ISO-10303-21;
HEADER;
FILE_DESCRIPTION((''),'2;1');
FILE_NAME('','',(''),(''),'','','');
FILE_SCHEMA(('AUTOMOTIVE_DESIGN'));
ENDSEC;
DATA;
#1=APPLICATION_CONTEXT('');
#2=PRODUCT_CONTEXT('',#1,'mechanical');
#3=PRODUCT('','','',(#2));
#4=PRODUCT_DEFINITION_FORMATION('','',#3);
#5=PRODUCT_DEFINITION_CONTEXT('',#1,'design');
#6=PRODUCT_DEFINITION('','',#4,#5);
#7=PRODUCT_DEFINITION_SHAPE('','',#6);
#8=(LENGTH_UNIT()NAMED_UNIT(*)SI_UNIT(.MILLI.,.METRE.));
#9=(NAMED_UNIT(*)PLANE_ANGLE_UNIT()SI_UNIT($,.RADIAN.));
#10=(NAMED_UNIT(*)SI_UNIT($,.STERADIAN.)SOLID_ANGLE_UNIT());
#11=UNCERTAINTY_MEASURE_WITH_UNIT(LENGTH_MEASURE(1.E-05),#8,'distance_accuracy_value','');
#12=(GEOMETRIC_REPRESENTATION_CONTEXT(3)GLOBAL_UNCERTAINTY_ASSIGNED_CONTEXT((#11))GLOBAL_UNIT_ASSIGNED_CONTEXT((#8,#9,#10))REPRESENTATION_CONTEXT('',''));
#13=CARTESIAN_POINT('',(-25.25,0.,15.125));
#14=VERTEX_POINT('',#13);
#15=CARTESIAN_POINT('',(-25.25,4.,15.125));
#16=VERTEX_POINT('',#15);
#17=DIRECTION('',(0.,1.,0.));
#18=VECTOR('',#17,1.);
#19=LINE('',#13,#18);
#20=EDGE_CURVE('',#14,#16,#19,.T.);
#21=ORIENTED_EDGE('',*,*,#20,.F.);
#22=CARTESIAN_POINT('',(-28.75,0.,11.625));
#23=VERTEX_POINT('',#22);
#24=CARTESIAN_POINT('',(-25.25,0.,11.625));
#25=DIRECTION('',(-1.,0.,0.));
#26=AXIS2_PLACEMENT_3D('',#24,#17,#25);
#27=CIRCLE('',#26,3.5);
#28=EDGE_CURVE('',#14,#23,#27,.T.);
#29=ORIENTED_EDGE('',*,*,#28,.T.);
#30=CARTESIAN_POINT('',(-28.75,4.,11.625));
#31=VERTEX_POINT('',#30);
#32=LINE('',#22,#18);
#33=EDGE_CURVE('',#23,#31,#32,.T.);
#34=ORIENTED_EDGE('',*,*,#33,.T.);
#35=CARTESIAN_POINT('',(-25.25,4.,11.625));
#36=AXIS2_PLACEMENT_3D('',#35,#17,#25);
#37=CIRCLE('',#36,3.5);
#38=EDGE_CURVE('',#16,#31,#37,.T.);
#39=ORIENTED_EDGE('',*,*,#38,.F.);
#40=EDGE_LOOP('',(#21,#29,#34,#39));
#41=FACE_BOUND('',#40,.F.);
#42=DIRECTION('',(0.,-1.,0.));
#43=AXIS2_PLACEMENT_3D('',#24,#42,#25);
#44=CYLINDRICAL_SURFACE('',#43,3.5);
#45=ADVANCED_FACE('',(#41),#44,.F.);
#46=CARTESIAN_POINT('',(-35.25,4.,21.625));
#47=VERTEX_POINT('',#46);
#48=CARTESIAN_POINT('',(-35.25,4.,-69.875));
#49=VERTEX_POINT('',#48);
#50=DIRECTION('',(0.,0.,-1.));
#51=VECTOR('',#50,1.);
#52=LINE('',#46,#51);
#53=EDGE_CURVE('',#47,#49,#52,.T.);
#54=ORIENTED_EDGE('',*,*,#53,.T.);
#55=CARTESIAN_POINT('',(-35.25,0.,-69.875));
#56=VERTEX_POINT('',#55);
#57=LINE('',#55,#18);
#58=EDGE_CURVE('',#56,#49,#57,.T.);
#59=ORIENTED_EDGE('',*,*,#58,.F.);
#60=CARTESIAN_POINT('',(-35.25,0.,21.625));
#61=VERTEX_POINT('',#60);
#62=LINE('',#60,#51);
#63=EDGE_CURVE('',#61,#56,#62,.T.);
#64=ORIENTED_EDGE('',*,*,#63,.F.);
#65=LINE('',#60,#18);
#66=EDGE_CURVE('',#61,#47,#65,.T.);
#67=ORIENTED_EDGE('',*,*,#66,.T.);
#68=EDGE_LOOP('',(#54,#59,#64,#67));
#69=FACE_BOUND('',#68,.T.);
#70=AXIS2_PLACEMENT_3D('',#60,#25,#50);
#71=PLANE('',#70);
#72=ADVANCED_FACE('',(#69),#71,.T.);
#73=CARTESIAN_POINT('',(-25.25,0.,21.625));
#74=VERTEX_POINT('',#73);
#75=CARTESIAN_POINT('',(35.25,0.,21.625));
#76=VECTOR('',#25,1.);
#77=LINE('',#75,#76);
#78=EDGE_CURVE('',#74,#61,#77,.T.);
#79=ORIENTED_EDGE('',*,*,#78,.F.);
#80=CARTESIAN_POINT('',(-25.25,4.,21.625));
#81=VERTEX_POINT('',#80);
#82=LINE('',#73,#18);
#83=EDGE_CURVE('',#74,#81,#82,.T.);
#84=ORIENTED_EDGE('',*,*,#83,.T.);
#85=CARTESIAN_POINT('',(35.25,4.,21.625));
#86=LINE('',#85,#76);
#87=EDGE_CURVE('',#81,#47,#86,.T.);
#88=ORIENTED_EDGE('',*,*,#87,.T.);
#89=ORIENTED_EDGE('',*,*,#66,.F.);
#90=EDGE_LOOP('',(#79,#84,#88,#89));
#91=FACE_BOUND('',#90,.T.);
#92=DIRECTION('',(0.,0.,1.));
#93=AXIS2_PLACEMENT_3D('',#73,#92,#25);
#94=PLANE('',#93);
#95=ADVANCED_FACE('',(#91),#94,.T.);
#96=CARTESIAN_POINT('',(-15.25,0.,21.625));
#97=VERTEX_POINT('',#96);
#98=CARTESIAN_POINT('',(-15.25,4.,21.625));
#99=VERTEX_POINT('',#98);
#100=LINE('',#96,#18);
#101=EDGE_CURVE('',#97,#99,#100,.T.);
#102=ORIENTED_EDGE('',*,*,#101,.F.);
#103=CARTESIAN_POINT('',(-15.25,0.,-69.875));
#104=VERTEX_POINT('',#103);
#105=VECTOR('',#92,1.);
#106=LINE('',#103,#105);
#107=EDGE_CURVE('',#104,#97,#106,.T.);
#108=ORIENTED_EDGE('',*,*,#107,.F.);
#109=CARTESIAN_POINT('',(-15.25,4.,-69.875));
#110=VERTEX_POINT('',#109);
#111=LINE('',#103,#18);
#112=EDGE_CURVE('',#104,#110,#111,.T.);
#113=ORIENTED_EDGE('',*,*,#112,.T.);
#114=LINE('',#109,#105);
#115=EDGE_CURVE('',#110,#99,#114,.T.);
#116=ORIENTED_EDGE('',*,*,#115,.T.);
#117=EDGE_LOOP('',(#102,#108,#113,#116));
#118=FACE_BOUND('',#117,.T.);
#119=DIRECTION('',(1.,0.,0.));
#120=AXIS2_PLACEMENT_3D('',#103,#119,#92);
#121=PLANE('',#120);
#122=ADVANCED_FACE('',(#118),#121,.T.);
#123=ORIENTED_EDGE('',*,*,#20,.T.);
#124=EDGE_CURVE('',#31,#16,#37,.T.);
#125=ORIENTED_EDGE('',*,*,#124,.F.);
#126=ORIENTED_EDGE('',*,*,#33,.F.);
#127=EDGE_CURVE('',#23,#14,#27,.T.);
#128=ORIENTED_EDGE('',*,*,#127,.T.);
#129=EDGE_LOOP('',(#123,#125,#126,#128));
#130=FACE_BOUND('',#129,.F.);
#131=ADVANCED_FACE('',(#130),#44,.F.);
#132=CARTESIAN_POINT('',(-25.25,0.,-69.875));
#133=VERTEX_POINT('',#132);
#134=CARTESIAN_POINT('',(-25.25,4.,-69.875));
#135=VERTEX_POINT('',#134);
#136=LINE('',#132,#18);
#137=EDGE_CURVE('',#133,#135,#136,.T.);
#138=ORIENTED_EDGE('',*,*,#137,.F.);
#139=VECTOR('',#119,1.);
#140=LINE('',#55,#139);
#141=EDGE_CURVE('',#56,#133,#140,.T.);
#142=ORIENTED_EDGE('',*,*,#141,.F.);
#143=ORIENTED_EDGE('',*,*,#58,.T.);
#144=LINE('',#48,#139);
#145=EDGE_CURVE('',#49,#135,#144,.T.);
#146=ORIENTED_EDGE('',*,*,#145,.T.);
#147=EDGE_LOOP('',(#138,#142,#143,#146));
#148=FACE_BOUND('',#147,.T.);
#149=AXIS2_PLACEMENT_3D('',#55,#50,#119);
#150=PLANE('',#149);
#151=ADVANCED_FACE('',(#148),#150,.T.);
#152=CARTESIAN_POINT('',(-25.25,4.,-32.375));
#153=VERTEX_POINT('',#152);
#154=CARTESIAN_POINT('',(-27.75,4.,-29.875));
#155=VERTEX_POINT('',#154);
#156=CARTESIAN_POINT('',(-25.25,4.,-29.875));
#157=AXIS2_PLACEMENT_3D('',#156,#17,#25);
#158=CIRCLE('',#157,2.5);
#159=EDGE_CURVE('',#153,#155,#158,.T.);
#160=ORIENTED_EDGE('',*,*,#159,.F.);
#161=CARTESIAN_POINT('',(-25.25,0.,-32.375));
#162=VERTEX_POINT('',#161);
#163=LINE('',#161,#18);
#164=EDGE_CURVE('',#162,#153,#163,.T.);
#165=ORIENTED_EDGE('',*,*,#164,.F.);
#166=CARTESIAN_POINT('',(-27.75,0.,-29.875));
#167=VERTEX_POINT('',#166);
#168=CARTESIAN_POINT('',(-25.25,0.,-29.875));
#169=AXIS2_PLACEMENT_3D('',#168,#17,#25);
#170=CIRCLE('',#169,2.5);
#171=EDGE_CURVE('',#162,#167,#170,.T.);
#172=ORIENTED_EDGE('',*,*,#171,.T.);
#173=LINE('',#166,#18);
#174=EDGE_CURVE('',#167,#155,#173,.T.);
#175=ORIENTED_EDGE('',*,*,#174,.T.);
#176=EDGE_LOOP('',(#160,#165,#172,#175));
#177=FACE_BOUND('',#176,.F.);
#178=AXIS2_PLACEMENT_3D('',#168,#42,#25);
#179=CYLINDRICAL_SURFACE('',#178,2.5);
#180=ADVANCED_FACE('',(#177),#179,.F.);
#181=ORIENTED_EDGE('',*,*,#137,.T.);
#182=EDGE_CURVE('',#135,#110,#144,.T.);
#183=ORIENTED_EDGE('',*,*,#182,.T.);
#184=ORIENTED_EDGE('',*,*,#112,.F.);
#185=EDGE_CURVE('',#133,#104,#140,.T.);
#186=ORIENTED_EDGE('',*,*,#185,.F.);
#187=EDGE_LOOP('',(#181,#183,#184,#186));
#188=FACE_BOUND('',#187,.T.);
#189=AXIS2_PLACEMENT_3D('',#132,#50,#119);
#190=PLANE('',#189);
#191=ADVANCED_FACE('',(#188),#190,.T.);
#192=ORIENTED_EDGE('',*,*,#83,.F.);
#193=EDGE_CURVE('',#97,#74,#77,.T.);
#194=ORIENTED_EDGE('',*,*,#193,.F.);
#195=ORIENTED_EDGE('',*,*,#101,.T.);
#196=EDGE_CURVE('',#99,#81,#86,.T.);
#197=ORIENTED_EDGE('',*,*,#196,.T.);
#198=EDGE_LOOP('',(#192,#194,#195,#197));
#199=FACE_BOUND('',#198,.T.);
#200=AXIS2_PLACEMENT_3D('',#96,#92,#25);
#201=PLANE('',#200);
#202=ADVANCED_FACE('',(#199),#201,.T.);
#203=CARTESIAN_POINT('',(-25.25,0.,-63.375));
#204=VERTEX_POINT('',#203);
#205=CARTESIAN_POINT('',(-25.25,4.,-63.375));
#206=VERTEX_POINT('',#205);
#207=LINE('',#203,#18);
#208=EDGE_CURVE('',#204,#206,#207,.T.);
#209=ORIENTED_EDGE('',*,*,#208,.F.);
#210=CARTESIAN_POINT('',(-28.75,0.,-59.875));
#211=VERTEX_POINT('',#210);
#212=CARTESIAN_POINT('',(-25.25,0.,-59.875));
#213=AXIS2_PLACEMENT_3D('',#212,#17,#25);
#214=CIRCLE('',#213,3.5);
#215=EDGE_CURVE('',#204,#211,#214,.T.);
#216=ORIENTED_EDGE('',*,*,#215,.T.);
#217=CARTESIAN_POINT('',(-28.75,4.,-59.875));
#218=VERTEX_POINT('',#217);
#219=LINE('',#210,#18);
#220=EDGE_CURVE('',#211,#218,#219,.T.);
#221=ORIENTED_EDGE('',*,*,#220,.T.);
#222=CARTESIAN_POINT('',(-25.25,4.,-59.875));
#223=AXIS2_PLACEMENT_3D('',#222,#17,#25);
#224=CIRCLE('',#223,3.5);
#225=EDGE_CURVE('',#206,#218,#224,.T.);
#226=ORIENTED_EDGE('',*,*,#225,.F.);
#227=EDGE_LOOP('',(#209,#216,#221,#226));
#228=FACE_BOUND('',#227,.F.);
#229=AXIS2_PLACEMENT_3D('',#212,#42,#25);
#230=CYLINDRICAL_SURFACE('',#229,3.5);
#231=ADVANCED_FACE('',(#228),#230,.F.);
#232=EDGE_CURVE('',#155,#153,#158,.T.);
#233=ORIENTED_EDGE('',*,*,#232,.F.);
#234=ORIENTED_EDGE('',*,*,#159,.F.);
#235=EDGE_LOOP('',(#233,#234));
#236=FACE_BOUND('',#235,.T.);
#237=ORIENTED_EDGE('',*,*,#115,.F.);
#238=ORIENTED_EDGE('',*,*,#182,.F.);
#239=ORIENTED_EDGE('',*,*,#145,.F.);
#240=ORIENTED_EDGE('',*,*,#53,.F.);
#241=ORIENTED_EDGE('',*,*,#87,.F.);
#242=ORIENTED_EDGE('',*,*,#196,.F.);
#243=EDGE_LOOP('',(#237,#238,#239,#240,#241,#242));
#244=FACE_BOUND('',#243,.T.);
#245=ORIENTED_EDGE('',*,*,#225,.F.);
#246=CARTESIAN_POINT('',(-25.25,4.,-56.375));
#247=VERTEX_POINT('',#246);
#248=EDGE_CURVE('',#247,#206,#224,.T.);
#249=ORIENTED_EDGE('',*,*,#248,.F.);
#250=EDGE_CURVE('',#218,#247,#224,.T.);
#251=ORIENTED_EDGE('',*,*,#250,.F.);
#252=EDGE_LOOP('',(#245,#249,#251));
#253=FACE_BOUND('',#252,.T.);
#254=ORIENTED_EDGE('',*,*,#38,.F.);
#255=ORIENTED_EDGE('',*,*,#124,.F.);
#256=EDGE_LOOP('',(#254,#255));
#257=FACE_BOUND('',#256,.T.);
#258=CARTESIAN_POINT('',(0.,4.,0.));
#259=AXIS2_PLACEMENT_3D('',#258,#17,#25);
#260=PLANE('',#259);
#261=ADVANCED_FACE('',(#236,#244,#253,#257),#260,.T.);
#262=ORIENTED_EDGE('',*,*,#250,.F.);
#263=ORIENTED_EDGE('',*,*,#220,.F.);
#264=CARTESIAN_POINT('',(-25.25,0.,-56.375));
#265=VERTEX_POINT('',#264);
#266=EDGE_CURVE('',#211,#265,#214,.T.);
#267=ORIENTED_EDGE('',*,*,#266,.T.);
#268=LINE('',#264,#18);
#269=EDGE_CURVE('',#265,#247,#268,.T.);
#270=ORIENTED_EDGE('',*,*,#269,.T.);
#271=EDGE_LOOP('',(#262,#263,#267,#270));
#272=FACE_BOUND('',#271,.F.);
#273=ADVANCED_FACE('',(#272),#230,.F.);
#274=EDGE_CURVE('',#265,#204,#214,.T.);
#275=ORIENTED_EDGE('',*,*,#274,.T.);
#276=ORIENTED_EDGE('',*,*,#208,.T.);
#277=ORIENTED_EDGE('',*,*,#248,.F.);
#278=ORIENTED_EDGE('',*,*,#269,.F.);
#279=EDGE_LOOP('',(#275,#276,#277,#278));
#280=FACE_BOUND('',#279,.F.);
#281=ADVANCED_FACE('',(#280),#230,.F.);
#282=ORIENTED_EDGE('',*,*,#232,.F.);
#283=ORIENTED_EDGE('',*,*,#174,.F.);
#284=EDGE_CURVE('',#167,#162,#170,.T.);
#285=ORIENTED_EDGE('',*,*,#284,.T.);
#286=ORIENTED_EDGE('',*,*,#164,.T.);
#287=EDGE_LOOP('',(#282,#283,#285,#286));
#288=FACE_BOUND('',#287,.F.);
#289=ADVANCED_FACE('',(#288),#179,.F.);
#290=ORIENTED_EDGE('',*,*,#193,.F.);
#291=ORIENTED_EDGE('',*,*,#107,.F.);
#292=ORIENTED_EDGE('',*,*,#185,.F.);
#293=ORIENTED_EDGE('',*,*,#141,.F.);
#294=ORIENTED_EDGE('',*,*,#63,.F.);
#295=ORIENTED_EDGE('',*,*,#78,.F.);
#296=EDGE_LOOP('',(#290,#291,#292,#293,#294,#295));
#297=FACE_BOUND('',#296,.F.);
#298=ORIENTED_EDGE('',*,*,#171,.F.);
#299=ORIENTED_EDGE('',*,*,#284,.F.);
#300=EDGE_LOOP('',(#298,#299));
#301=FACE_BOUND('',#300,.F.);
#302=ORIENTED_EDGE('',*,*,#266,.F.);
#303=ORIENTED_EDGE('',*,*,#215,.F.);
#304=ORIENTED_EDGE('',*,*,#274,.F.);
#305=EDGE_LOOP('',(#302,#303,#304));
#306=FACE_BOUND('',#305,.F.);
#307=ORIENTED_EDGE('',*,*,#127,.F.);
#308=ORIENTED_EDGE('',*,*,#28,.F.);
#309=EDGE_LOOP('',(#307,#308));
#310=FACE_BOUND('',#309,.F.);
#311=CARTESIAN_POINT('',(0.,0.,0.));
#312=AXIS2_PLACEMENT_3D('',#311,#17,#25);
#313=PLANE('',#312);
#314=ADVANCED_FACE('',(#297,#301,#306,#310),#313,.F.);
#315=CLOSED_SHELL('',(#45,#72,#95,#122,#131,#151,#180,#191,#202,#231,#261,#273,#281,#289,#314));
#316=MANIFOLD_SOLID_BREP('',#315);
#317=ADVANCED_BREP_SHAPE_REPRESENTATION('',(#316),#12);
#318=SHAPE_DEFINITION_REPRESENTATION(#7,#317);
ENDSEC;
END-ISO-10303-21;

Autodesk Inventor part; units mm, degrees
ref_plane "YZ Plane" through (0, 0, 0) normal (1, 0, 0) x (0, 1, 0)
ref_plane "XZ Plane" through (0, 0, 0) normal (0, 1, 0) x (-1, 0, 0)
ref_plane "XY Plane" through (0, 0, 0) normal (0, 0, 1) x (1, 0, 0)
sketch "Sketch1" plane through (0, 0, 0) normal (0, 1, 0) x (-1, 0, 0)
  circle A0 centre (0, 0) radius 10.5
  line L0 (0, 0) -> (0, -23.5)
  circle A1 centre (0, -23.5) radius 5.25
  line L1 (0, -23.5) -> (0, -35.25)
  line L2 (-14, -35.25) -> (-14, -58.75)
  line L3 (-14, -58.75) -> (-19, -58.75)
  line L4 (-19, -58.75) -> (-19, -35.25)
  line L5 (-35.25, 21.625) -> (35.25, 21.625)
  line L6 (-35.25, 21.625) -> (35.25, 21.625) construction
  line L7 (35.25, 21.625) -> (25.25, 21.625)
  line L8 (-35.25, 21.625) -> (35.25, 21.625)
  line L9 (35.25, 21.625) -> (35.25, -69.875)
  line L10 (35.25, -69.875) -> (-35.25, -69.875)
  line L11 (-35.25, 11.625) -> (-35.25, 21.625)
  line L12 (-35.25, 21.625) -> (-35.25, 11.625)
  line L13 (-35.25, 11.625) -> (-25.25, 11.625)
  circle A2 centre (-25.25, 11.625) radius 3.5
  line L14 (35.25, 21.625) -> (25.25, 21.625)
  line L15 (25.25, 21.625) -> (25.25, 11.625)
  circle A3 centre (25.25, 11.625) radius 3.5
  line L16 (35.25, -69.875) -> (25.25, -69.875)
  line L17 (25.25, -69.875) -> (25.25, -59.875)
  circle A4 centre (25.25, -59.875) radius 3.5
  line L18 (-35.25, -69.875) -> (-25.25, -69.875)
  line L19 (-25.25, -69.875) -> (-25.25, -59.875)
  circle A5 centre (-25.25, -59.875) radius 3.5
  line L20 (-25.25, 11.625) -> (-25.25, -18.375)
  line L21 (25.25, -59.875) -> (25.25, -29.875)
  circle A6 centre (-25.25, -18.375) radius 2.5
  circle A7 centre (25.25, -29.875) radius 2.5
  line L22 (-19, -35.25) -> (-14, -35.25)
  line L23 (35.25, -69.875) -> (15.25, -69.875)
  line L24 (15.25, -69.875) -> (15.25, 21.625)
  dimension "d0" = 21
  dimension "d1" = 23.5
  dimension "d2" = 10.5
  dimension "d3" = 11.75
  dimension "d5" = 23.5
  dimension "d6" = 5
  dimension "d7" = 23.5
  dimension "d9" = 70.5
  dimension "d40" = 21.625
  dimension "d41" = 70.5
  dimension "d42" = 91.5
  dimension "d43" = 10
  dimension "d44" = 10
  dimension "d45" = 7
  dimension "d46" = 10
  dimension "d47" = 10
  dimension "d48" = 90
  dimension "d50" = 7
  dimension "d51" = 10
  dimension "d52" = 10
  dimension "d53" = 7
  dimension "d54" = 10
  dimension "d55" = 10
  dimension "d56" = 7
  dimension "d60" = 30
  dimension "d61" = 30
  dimension "d62" = 5
  dimension "d63" = 5
  dimension "d64" = 14
  dimension "d65" = 20
extrude "Extrusion1" add sketch "Sketch1" along normal blind 4 contours L5 L9 L10 L24
properties part number "m"
